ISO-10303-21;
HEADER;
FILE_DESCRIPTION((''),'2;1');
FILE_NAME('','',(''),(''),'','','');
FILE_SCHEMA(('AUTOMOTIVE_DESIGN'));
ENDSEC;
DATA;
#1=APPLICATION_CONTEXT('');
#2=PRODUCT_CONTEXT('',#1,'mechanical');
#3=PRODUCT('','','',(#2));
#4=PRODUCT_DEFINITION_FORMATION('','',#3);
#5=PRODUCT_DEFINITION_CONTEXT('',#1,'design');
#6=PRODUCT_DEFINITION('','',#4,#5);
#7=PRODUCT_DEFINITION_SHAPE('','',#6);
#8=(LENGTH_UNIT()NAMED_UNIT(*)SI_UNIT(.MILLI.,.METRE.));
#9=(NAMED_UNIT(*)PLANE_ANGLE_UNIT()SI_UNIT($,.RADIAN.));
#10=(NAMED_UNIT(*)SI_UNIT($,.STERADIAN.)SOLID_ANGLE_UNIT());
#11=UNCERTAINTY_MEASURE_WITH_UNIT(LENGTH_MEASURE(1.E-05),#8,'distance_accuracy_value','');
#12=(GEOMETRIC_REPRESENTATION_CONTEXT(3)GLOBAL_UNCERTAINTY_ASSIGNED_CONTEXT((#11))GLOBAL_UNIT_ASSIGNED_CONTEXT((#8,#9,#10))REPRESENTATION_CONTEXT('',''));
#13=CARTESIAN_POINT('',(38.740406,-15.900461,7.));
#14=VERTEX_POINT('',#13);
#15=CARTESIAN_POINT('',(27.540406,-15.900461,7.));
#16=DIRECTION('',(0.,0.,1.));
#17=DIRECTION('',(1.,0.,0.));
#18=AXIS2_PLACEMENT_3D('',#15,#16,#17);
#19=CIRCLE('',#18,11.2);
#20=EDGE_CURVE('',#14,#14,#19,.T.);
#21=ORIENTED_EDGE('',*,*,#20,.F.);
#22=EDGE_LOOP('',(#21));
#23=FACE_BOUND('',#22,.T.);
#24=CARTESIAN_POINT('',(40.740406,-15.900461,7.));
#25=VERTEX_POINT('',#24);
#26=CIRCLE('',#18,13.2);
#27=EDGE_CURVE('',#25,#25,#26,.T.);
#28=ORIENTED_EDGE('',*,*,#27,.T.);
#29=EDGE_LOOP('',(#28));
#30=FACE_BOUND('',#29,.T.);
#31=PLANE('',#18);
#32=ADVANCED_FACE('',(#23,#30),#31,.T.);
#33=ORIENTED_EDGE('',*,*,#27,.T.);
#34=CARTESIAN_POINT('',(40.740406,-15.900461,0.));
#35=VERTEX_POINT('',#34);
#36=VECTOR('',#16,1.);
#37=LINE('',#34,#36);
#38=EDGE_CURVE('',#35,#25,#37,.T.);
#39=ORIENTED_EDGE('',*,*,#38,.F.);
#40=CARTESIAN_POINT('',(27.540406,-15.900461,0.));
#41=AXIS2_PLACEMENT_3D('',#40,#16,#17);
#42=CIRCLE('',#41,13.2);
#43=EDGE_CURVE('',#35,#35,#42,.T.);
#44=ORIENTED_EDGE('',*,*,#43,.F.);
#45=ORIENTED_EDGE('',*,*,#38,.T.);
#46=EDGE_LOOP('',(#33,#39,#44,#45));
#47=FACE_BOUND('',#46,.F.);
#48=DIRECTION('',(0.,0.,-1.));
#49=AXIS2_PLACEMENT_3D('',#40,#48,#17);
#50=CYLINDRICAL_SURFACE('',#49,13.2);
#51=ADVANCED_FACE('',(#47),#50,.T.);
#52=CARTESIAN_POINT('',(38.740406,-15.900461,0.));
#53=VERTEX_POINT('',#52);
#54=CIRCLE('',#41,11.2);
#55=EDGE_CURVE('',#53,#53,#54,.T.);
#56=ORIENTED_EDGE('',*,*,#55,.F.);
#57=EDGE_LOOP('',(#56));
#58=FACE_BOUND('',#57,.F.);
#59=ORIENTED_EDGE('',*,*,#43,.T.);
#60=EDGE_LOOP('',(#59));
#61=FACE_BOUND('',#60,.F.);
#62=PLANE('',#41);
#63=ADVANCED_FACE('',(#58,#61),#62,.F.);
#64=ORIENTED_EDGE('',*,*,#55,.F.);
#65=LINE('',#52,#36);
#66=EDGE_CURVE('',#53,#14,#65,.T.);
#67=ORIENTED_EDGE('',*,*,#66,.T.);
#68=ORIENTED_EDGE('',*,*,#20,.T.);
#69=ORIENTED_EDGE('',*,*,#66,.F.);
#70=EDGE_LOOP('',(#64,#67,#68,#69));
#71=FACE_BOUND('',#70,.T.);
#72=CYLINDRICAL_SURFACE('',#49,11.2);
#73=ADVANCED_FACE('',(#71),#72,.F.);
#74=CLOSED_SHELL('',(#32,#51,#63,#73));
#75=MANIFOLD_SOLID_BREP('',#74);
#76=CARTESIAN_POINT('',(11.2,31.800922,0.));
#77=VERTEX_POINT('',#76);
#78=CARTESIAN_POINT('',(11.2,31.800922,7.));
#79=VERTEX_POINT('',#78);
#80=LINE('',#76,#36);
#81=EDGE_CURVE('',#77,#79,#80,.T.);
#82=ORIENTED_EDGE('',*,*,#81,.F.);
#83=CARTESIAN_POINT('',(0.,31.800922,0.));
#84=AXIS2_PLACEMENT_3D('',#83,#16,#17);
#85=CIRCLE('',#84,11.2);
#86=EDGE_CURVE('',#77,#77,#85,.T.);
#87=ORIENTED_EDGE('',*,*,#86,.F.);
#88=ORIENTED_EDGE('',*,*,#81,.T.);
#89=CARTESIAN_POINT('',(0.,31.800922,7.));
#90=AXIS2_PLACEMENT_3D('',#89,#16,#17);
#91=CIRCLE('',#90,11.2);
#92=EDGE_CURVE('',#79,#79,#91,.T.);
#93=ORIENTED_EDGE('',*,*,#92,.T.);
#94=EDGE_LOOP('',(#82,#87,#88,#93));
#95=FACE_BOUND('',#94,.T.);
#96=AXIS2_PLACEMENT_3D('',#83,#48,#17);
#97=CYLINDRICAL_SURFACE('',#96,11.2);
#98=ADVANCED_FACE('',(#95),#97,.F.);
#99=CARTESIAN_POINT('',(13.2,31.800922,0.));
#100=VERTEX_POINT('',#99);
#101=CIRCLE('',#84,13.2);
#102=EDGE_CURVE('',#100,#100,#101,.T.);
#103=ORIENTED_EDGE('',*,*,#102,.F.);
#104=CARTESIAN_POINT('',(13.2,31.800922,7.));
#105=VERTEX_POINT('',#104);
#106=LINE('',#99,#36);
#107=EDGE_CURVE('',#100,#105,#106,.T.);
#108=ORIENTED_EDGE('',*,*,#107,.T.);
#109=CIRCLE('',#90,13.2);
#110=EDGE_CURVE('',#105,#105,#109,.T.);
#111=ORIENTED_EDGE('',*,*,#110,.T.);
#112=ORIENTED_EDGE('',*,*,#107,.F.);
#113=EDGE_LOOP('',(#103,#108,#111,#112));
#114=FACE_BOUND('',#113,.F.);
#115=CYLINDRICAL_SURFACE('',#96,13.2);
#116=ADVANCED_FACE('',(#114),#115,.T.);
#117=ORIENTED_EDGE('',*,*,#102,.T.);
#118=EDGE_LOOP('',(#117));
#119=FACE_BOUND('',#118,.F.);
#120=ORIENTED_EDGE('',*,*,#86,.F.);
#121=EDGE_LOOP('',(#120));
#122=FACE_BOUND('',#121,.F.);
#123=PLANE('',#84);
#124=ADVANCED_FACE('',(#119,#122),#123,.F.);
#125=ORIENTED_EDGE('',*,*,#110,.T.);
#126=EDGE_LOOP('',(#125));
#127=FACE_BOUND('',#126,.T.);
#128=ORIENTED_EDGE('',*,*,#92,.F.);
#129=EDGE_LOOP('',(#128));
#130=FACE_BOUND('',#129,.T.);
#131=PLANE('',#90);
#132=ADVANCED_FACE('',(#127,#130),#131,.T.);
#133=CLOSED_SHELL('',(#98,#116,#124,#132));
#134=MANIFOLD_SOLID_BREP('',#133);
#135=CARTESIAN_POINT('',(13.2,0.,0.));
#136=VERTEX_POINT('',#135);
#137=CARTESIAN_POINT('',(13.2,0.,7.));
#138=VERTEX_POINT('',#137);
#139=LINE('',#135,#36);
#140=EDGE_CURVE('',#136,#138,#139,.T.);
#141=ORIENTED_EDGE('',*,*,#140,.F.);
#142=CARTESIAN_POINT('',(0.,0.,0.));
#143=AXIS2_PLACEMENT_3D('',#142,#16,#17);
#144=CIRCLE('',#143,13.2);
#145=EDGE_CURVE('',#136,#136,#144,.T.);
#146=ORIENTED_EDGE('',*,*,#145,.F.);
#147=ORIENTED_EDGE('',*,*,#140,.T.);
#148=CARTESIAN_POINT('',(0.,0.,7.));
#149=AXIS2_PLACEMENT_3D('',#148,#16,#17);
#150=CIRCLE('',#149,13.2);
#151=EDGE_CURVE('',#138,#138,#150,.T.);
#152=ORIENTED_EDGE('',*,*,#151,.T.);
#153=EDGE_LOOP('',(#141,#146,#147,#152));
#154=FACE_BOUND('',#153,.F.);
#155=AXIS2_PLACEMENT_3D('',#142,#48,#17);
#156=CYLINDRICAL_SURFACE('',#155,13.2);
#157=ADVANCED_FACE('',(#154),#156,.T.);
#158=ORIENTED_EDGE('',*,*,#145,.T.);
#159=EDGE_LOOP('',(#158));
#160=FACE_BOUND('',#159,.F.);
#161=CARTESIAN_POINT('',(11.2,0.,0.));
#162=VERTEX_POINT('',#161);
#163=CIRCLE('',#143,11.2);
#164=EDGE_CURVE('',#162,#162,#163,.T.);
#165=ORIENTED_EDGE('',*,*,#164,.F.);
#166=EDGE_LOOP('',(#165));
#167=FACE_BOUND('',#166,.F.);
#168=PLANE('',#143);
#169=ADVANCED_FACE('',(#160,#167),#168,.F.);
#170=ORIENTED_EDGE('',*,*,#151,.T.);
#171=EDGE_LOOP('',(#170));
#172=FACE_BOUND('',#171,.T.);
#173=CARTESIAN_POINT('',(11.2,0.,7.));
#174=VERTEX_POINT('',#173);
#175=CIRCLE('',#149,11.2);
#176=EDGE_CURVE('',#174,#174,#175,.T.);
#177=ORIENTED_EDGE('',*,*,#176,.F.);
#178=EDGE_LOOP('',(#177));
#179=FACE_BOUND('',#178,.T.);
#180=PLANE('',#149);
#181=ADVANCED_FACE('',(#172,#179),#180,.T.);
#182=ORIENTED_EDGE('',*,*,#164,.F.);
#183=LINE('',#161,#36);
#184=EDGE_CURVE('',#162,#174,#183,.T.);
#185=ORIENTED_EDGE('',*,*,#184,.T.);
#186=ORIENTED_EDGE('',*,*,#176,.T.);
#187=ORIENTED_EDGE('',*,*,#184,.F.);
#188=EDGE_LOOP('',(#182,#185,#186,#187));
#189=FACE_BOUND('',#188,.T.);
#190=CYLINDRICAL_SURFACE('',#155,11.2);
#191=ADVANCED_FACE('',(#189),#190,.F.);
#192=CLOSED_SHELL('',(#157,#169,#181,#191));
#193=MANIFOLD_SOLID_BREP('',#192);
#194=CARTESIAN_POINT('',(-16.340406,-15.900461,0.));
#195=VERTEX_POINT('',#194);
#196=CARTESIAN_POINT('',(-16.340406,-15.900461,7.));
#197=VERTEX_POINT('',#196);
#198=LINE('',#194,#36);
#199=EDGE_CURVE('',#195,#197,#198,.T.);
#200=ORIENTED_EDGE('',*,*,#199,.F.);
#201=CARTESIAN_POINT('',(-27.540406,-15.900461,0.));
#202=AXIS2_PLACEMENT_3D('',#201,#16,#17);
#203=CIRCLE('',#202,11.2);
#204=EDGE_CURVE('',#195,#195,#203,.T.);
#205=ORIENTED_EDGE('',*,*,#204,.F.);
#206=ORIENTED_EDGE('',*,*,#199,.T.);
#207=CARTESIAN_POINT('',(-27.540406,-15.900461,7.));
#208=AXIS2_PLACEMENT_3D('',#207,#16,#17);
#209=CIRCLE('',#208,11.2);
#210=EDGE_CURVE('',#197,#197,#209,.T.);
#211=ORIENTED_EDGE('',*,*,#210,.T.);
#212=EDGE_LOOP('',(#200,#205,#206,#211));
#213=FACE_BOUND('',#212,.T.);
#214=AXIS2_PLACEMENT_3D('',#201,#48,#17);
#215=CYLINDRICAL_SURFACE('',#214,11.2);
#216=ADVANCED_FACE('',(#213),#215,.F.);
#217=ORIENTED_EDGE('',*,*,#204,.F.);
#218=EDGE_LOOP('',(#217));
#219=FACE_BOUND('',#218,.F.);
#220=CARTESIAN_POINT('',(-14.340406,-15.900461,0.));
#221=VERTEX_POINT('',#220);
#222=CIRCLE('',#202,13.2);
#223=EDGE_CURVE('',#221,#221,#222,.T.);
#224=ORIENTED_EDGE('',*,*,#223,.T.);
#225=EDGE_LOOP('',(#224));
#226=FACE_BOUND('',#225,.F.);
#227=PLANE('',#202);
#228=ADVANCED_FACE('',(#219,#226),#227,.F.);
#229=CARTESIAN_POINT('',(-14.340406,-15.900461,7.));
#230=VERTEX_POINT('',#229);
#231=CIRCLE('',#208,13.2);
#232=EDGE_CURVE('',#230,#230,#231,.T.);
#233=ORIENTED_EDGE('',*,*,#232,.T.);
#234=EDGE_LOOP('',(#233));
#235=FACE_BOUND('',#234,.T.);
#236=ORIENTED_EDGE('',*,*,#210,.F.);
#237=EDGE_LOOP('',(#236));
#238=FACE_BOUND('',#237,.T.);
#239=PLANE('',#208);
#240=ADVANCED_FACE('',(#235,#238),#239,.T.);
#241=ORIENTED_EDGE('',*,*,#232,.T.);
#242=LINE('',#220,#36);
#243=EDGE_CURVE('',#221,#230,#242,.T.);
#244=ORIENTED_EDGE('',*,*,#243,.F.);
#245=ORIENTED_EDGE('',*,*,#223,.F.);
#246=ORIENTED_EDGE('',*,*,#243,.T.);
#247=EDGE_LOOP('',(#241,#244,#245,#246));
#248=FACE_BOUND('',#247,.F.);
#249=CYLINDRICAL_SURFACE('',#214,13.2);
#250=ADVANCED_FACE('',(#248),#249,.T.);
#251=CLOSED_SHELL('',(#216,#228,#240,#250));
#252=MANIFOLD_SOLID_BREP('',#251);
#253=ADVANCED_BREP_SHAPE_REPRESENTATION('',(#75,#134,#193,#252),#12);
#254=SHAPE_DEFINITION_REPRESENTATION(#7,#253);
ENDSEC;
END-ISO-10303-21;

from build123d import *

# Parameters (mm, degrees)
F0_R     = 13.2
F0_R_2   = 11.2
F2_DEPTH = 7


# Not quite as in the source:
# - the program builds the solid bodies; features that only make, move or delete a surface that nothing else refers to are left out


with BuildPart() as f2:
    # F0 (on Top) → F2 (new body)
    with BuildSketch(Plane.XY):
        with Locations((0, 31.8009220064)):
            Circle(F0_R)
        with Locations((0, 31.8009220064)):
            Circle(F0_R_2, mode=Mode.SUBTRACT)
    extrude(amount=F2_DEPTH)


with BuildPart() as f2b:
    # F0 (on Top) → F2, piece 2 (new body)
    with BuildSketch(Plane.XY):
        with Locations((27.5404063213, -15.9004610032)):
            Circle(F0_R)
        with Locations((27.5404063213, -15.9004610032)):
            Circle(F0_R_2, mode=Mode.SUBTRACT)
    extrude(amount=F2_DEPTH)


with BuildPart() as f2c:
    # F0 (on Top) → F2, piece 3 (new body)
    with BuildSketch(Plane.XY):
        Circle(F0_R)
        Circle(F0_R_2, mode=Mode.SUBTRACT)
    extrude(amount=F2_DEPTH)


with BuildPart() as f2d:
    # F0 (on Top) → F2, piece 4 (new body)
    with BuildSketch(Plane.XY):
        with Locations((-27.5404063213, -15.9004610032)):
            Circle(F0_R)
        with Locations((-27.5404063213, -15.9004610032)):
            Circle(F0_R_2, mode=Mode.SUBTRACT)
    extrude(amount=F2_DEPTH)


solid = Compound([f2.part, f2b.part, f2c.part, f2d.part])
